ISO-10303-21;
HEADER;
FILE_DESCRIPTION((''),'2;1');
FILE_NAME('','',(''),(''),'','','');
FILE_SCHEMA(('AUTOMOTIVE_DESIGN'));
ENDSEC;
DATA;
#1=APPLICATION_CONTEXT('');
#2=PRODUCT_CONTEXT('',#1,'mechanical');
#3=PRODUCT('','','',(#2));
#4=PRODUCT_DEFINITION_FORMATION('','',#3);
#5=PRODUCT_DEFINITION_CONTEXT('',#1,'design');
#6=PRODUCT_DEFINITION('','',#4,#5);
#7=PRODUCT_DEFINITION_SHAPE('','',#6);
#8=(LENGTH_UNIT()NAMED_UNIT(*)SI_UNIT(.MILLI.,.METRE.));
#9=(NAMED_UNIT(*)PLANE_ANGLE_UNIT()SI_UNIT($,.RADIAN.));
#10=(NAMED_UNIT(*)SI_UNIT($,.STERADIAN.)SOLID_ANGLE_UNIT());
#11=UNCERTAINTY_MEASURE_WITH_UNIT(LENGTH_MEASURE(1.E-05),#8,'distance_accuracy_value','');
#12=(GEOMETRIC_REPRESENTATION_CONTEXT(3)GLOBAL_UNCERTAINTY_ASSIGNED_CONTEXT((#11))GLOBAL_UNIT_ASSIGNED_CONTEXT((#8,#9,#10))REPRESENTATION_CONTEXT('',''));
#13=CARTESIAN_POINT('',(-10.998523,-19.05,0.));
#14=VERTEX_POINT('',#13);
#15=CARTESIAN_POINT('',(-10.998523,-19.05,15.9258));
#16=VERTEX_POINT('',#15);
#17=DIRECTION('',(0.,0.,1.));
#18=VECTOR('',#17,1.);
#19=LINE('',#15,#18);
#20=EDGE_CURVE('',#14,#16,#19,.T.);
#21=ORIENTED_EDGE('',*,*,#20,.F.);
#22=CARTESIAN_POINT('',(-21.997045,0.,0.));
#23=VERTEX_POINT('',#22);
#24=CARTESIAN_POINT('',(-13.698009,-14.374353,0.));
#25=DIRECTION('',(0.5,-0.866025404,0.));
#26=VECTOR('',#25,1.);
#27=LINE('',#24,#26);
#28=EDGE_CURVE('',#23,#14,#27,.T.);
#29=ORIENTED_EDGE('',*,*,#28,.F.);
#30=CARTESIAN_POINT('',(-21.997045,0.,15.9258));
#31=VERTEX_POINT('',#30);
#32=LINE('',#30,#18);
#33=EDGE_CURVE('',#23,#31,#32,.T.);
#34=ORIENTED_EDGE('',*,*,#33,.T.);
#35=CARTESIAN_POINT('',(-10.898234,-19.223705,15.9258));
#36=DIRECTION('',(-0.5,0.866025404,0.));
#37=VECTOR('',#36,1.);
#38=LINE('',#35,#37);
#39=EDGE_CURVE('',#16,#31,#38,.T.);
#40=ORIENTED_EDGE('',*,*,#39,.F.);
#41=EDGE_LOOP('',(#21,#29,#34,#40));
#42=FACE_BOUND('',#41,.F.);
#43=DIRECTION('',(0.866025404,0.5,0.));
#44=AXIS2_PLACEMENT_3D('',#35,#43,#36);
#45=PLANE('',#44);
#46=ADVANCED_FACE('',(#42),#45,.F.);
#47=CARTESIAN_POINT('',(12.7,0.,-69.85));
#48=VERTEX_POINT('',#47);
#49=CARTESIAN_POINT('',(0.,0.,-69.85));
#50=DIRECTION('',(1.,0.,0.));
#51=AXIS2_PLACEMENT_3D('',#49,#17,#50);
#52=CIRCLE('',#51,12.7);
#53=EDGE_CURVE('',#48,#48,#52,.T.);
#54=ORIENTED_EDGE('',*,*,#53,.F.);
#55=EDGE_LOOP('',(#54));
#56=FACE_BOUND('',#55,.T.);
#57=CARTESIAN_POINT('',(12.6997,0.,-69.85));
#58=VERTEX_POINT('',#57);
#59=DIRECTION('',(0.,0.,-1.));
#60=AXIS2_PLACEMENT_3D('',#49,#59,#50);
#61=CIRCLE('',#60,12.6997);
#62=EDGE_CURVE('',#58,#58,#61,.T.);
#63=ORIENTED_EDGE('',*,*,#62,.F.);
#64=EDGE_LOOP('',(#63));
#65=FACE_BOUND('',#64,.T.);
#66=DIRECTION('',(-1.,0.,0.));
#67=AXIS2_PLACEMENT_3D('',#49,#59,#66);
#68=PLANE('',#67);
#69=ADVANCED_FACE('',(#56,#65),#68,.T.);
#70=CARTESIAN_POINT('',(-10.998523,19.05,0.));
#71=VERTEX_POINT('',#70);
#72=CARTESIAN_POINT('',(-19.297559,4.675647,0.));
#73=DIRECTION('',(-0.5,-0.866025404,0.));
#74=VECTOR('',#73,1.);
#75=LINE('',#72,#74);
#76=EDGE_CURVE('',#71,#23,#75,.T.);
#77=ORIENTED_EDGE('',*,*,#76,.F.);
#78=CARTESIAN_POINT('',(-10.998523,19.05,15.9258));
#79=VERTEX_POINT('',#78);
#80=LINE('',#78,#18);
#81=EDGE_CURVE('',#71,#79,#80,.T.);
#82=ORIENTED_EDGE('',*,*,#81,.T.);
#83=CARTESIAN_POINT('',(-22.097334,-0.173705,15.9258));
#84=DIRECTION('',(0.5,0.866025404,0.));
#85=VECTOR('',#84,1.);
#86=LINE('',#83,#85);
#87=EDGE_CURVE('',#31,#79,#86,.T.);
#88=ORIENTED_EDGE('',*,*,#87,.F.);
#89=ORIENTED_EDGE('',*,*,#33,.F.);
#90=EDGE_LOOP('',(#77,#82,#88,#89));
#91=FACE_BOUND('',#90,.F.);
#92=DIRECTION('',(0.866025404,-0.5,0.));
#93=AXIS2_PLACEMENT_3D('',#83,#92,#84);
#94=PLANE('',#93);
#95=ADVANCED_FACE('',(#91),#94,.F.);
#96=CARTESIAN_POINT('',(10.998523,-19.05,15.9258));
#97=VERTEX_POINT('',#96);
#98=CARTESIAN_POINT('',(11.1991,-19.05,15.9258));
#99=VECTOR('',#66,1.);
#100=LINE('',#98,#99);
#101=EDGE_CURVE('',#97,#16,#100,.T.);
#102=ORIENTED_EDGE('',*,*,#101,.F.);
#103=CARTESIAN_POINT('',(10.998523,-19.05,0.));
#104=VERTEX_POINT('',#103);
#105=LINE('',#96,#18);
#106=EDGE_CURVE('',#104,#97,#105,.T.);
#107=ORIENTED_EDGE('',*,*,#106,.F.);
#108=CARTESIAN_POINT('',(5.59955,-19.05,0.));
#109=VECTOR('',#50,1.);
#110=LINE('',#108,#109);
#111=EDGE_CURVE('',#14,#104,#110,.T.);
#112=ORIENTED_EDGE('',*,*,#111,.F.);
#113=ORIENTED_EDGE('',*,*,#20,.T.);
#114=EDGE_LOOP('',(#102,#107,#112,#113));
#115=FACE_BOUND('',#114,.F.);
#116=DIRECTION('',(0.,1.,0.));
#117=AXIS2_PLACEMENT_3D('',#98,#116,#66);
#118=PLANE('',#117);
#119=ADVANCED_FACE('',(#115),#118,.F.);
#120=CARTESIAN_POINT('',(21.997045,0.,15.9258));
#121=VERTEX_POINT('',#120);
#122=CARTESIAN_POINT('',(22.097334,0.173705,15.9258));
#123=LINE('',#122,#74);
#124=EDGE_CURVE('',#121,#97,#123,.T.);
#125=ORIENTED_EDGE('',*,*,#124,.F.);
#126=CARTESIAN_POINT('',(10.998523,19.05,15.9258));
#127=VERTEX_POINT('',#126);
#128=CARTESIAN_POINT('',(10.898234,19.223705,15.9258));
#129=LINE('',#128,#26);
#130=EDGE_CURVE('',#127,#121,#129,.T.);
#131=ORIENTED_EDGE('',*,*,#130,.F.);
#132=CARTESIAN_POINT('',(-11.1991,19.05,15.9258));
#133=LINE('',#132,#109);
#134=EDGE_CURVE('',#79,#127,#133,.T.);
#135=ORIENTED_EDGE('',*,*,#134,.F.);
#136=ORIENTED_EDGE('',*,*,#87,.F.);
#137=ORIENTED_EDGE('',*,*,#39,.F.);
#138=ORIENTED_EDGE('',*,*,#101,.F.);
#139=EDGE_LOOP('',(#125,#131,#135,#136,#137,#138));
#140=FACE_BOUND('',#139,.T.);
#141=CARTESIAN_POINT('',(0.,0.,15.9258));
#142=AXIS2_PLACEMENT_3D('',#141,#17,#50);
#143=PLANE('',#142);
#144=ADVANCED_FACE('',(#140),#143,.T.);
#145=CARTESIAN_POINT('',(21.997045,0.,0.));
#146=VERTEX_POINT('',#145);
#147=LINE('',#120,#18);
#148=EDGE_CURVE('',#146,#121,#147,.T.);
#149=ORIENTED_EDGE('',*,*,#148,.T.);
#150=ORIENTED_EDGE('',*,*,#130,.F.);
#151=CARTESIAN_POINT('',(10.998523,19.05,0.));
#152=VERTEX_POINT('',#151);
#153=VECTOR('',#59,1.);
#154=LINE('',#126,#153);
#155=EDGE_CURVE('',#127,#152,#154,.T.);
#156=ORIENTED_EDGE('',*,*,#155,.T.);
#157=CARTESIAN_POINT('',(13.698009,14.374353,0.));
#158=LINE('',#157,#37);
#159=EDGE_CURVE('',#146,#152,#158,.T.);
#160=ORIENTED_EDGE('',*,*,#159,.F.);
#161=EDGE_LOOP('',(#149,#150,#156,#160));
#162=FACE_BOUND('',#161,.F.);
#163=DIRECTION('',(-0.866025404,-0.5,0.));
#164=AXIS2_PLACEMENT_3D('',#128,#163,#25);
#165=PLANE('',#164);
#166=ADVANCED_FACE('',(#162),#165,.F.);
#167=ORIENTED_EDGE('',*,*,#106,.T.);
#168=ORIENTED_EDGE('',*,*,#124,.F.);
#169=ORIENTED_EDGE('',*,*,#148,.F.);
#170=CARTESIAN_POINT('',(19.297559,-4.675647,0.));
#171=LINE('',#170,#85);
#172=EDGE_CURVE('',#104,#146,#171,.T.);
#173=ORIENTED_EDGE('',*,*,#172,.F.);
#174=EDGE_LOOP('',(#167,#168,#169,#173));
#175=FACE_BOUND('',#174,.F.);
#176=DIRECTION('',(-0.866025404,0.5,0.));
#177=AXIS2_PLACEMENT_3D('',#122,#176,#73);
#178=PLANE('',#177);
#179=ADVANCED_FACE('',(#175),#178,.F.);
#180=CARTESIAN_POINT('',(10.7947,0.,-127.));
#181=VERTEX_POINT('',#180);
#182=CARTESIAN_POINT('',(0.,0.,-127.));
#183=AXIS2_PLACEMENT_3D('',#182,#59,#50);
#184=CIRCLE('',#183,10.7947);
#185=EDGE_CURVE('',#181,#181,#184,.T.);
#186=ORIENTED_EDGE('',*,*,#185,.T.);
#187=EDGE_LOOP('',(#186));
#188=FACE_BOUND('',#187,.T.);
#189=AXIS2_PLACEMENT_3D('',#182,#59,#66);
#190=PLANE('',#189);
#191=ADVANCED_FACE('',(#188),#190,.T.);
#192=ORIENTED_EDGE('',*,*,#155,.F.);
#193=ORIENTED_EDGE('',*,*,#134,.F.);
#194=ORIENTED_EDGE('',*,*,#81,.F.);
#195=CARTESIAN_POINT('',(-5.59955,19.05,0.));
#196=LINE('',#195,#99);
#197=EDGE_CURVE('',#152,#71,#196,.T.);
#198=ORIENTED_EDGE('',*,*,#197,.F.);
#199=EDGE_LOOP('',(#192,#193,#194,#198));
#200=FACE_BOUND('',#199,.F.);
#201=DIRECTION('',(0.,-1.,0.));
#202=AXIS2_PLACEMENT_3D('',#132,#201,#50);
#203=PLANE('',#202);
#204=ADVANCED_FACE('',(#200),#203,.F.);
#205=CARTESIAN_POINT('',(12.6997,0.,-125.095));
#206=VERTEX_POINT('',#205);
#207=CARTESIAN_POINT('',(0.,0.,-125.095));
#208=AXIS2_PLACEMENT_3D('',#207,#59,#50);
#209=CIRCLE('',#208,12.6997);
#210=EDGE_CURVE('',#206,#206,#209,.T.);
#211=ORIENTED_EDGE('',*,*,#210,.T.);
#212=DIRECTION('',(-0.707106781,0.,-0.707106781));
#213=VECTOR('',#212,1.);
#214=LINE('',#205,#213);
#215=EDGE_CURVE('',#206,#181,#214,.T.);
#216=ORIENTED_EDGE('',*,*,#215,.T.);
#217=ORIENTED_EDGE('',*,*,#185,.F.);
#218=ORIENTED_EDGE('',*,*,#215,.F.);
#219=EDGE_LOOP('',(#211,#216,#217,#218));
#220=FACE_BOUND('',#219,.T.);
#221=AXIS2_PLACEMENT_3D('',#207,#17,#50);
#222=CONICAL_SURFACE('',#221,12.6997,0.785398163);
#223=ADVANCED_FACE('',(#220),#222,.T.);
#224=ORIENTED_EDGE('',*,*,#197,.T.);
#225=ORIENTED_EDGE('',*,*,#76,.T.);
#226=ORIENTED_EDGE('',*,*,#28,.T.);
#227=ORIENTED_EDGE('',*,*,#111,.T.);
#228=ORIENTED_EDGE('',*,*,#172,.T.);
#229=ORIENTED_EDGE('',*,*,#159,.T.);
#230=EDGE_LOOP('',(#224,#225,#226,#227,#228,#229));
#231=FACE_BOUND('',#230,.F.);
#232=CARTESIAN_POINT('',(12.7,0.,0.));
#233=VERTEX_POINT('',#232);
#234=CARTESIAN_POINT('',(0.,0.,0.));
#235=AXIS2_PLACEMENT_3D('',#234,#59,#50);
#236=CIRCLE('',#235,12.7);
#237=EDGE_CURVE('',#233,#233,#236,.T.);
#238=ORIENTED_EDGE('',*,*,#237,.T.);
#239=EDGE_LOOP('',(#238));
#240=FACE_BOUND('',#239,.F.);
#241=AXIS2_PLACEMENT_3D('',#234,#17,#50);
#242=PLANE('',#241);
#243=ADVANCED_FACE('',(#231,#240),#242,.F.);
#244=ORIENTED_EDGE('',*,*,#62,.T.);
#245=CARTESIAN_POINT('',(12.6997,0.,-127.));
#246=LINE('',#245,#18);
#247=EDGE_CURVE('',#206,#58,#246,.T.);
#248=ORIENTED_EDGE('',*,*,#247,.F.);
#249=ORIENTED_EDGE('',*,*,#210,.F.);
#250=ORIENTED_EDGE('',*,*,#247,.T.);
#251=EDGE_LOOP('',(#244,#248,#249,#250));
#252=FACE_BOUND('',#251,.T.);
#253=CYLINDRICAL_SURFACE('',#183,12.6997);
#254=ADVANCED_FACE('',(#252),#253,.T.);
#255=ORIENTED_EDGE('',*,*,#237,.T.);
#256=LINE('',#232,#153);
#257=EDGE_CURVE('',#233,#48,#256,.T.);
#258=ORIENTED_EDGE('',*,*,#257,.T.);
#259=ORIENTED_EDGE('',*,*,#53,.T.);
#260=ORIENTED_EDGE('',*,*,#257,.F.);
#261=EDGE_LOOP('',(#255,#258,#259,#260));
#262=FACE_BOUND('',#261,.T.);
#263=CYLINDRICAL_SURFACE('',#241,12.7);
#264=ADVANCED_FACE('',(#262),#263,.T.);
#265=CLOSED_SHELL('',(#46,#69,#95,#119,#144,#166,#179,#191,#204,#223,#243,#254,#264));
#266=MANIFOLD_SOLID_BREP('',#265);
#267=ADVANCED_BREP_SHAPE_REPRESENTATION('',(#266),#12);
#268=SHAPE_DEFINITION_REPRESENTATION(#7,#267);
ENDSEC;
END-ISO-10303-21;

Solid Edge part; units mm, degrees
sketch "Sketch1" plane through (0, 0, 0) normal (0, 0, 1) x (1, 0, 0)
  circle A0 centre (0, 0) radius 22.098
  dimension "D1" = 44.196
extrude "Protrusion1" add sketch "Sketch1" along normal blind 15.9258
sketch "Sketch2" plane through (0, 0, 0) normal (0, 0, -1) x (1, 0, 0)
  circle A0 centre (0, 0) radius 12.7
extrude "Protrusion2" add sketch "Sketch2" along normal blind 127
sketch "Sketch3" plane through (0, 0, -127) normal (0, 0, -1) x (1, 0, 0)
  circle A0 centre (0, 0) radius 12.6997
extrude "Cutout1" cut sketch "Sketch3" against normal blind 57.15 flip side to cut
chamfer "Chamfer_1" distance 1.905 angle 45 1 edges at (-12.6997, 0, -127)
sketch "Sketch4" plane through (0, 0, 15.9258) normal (0, 0, 1) x (1, 0, 0)
  line L0 (-11.1991, 19.05) -> (11.1991, 19.05)
  dimension "D1" = 38.1
extrude "Cutout2" cut sketch "Sketch4" against normal up to next material side at (0, 19.1, 15.9258)
pattern_circular "Pattern1" count 6 over 360 about axis through (0, 0, 15.9258) along (0, 0, 1) of "Cutout2"
properties part number "24106948"
